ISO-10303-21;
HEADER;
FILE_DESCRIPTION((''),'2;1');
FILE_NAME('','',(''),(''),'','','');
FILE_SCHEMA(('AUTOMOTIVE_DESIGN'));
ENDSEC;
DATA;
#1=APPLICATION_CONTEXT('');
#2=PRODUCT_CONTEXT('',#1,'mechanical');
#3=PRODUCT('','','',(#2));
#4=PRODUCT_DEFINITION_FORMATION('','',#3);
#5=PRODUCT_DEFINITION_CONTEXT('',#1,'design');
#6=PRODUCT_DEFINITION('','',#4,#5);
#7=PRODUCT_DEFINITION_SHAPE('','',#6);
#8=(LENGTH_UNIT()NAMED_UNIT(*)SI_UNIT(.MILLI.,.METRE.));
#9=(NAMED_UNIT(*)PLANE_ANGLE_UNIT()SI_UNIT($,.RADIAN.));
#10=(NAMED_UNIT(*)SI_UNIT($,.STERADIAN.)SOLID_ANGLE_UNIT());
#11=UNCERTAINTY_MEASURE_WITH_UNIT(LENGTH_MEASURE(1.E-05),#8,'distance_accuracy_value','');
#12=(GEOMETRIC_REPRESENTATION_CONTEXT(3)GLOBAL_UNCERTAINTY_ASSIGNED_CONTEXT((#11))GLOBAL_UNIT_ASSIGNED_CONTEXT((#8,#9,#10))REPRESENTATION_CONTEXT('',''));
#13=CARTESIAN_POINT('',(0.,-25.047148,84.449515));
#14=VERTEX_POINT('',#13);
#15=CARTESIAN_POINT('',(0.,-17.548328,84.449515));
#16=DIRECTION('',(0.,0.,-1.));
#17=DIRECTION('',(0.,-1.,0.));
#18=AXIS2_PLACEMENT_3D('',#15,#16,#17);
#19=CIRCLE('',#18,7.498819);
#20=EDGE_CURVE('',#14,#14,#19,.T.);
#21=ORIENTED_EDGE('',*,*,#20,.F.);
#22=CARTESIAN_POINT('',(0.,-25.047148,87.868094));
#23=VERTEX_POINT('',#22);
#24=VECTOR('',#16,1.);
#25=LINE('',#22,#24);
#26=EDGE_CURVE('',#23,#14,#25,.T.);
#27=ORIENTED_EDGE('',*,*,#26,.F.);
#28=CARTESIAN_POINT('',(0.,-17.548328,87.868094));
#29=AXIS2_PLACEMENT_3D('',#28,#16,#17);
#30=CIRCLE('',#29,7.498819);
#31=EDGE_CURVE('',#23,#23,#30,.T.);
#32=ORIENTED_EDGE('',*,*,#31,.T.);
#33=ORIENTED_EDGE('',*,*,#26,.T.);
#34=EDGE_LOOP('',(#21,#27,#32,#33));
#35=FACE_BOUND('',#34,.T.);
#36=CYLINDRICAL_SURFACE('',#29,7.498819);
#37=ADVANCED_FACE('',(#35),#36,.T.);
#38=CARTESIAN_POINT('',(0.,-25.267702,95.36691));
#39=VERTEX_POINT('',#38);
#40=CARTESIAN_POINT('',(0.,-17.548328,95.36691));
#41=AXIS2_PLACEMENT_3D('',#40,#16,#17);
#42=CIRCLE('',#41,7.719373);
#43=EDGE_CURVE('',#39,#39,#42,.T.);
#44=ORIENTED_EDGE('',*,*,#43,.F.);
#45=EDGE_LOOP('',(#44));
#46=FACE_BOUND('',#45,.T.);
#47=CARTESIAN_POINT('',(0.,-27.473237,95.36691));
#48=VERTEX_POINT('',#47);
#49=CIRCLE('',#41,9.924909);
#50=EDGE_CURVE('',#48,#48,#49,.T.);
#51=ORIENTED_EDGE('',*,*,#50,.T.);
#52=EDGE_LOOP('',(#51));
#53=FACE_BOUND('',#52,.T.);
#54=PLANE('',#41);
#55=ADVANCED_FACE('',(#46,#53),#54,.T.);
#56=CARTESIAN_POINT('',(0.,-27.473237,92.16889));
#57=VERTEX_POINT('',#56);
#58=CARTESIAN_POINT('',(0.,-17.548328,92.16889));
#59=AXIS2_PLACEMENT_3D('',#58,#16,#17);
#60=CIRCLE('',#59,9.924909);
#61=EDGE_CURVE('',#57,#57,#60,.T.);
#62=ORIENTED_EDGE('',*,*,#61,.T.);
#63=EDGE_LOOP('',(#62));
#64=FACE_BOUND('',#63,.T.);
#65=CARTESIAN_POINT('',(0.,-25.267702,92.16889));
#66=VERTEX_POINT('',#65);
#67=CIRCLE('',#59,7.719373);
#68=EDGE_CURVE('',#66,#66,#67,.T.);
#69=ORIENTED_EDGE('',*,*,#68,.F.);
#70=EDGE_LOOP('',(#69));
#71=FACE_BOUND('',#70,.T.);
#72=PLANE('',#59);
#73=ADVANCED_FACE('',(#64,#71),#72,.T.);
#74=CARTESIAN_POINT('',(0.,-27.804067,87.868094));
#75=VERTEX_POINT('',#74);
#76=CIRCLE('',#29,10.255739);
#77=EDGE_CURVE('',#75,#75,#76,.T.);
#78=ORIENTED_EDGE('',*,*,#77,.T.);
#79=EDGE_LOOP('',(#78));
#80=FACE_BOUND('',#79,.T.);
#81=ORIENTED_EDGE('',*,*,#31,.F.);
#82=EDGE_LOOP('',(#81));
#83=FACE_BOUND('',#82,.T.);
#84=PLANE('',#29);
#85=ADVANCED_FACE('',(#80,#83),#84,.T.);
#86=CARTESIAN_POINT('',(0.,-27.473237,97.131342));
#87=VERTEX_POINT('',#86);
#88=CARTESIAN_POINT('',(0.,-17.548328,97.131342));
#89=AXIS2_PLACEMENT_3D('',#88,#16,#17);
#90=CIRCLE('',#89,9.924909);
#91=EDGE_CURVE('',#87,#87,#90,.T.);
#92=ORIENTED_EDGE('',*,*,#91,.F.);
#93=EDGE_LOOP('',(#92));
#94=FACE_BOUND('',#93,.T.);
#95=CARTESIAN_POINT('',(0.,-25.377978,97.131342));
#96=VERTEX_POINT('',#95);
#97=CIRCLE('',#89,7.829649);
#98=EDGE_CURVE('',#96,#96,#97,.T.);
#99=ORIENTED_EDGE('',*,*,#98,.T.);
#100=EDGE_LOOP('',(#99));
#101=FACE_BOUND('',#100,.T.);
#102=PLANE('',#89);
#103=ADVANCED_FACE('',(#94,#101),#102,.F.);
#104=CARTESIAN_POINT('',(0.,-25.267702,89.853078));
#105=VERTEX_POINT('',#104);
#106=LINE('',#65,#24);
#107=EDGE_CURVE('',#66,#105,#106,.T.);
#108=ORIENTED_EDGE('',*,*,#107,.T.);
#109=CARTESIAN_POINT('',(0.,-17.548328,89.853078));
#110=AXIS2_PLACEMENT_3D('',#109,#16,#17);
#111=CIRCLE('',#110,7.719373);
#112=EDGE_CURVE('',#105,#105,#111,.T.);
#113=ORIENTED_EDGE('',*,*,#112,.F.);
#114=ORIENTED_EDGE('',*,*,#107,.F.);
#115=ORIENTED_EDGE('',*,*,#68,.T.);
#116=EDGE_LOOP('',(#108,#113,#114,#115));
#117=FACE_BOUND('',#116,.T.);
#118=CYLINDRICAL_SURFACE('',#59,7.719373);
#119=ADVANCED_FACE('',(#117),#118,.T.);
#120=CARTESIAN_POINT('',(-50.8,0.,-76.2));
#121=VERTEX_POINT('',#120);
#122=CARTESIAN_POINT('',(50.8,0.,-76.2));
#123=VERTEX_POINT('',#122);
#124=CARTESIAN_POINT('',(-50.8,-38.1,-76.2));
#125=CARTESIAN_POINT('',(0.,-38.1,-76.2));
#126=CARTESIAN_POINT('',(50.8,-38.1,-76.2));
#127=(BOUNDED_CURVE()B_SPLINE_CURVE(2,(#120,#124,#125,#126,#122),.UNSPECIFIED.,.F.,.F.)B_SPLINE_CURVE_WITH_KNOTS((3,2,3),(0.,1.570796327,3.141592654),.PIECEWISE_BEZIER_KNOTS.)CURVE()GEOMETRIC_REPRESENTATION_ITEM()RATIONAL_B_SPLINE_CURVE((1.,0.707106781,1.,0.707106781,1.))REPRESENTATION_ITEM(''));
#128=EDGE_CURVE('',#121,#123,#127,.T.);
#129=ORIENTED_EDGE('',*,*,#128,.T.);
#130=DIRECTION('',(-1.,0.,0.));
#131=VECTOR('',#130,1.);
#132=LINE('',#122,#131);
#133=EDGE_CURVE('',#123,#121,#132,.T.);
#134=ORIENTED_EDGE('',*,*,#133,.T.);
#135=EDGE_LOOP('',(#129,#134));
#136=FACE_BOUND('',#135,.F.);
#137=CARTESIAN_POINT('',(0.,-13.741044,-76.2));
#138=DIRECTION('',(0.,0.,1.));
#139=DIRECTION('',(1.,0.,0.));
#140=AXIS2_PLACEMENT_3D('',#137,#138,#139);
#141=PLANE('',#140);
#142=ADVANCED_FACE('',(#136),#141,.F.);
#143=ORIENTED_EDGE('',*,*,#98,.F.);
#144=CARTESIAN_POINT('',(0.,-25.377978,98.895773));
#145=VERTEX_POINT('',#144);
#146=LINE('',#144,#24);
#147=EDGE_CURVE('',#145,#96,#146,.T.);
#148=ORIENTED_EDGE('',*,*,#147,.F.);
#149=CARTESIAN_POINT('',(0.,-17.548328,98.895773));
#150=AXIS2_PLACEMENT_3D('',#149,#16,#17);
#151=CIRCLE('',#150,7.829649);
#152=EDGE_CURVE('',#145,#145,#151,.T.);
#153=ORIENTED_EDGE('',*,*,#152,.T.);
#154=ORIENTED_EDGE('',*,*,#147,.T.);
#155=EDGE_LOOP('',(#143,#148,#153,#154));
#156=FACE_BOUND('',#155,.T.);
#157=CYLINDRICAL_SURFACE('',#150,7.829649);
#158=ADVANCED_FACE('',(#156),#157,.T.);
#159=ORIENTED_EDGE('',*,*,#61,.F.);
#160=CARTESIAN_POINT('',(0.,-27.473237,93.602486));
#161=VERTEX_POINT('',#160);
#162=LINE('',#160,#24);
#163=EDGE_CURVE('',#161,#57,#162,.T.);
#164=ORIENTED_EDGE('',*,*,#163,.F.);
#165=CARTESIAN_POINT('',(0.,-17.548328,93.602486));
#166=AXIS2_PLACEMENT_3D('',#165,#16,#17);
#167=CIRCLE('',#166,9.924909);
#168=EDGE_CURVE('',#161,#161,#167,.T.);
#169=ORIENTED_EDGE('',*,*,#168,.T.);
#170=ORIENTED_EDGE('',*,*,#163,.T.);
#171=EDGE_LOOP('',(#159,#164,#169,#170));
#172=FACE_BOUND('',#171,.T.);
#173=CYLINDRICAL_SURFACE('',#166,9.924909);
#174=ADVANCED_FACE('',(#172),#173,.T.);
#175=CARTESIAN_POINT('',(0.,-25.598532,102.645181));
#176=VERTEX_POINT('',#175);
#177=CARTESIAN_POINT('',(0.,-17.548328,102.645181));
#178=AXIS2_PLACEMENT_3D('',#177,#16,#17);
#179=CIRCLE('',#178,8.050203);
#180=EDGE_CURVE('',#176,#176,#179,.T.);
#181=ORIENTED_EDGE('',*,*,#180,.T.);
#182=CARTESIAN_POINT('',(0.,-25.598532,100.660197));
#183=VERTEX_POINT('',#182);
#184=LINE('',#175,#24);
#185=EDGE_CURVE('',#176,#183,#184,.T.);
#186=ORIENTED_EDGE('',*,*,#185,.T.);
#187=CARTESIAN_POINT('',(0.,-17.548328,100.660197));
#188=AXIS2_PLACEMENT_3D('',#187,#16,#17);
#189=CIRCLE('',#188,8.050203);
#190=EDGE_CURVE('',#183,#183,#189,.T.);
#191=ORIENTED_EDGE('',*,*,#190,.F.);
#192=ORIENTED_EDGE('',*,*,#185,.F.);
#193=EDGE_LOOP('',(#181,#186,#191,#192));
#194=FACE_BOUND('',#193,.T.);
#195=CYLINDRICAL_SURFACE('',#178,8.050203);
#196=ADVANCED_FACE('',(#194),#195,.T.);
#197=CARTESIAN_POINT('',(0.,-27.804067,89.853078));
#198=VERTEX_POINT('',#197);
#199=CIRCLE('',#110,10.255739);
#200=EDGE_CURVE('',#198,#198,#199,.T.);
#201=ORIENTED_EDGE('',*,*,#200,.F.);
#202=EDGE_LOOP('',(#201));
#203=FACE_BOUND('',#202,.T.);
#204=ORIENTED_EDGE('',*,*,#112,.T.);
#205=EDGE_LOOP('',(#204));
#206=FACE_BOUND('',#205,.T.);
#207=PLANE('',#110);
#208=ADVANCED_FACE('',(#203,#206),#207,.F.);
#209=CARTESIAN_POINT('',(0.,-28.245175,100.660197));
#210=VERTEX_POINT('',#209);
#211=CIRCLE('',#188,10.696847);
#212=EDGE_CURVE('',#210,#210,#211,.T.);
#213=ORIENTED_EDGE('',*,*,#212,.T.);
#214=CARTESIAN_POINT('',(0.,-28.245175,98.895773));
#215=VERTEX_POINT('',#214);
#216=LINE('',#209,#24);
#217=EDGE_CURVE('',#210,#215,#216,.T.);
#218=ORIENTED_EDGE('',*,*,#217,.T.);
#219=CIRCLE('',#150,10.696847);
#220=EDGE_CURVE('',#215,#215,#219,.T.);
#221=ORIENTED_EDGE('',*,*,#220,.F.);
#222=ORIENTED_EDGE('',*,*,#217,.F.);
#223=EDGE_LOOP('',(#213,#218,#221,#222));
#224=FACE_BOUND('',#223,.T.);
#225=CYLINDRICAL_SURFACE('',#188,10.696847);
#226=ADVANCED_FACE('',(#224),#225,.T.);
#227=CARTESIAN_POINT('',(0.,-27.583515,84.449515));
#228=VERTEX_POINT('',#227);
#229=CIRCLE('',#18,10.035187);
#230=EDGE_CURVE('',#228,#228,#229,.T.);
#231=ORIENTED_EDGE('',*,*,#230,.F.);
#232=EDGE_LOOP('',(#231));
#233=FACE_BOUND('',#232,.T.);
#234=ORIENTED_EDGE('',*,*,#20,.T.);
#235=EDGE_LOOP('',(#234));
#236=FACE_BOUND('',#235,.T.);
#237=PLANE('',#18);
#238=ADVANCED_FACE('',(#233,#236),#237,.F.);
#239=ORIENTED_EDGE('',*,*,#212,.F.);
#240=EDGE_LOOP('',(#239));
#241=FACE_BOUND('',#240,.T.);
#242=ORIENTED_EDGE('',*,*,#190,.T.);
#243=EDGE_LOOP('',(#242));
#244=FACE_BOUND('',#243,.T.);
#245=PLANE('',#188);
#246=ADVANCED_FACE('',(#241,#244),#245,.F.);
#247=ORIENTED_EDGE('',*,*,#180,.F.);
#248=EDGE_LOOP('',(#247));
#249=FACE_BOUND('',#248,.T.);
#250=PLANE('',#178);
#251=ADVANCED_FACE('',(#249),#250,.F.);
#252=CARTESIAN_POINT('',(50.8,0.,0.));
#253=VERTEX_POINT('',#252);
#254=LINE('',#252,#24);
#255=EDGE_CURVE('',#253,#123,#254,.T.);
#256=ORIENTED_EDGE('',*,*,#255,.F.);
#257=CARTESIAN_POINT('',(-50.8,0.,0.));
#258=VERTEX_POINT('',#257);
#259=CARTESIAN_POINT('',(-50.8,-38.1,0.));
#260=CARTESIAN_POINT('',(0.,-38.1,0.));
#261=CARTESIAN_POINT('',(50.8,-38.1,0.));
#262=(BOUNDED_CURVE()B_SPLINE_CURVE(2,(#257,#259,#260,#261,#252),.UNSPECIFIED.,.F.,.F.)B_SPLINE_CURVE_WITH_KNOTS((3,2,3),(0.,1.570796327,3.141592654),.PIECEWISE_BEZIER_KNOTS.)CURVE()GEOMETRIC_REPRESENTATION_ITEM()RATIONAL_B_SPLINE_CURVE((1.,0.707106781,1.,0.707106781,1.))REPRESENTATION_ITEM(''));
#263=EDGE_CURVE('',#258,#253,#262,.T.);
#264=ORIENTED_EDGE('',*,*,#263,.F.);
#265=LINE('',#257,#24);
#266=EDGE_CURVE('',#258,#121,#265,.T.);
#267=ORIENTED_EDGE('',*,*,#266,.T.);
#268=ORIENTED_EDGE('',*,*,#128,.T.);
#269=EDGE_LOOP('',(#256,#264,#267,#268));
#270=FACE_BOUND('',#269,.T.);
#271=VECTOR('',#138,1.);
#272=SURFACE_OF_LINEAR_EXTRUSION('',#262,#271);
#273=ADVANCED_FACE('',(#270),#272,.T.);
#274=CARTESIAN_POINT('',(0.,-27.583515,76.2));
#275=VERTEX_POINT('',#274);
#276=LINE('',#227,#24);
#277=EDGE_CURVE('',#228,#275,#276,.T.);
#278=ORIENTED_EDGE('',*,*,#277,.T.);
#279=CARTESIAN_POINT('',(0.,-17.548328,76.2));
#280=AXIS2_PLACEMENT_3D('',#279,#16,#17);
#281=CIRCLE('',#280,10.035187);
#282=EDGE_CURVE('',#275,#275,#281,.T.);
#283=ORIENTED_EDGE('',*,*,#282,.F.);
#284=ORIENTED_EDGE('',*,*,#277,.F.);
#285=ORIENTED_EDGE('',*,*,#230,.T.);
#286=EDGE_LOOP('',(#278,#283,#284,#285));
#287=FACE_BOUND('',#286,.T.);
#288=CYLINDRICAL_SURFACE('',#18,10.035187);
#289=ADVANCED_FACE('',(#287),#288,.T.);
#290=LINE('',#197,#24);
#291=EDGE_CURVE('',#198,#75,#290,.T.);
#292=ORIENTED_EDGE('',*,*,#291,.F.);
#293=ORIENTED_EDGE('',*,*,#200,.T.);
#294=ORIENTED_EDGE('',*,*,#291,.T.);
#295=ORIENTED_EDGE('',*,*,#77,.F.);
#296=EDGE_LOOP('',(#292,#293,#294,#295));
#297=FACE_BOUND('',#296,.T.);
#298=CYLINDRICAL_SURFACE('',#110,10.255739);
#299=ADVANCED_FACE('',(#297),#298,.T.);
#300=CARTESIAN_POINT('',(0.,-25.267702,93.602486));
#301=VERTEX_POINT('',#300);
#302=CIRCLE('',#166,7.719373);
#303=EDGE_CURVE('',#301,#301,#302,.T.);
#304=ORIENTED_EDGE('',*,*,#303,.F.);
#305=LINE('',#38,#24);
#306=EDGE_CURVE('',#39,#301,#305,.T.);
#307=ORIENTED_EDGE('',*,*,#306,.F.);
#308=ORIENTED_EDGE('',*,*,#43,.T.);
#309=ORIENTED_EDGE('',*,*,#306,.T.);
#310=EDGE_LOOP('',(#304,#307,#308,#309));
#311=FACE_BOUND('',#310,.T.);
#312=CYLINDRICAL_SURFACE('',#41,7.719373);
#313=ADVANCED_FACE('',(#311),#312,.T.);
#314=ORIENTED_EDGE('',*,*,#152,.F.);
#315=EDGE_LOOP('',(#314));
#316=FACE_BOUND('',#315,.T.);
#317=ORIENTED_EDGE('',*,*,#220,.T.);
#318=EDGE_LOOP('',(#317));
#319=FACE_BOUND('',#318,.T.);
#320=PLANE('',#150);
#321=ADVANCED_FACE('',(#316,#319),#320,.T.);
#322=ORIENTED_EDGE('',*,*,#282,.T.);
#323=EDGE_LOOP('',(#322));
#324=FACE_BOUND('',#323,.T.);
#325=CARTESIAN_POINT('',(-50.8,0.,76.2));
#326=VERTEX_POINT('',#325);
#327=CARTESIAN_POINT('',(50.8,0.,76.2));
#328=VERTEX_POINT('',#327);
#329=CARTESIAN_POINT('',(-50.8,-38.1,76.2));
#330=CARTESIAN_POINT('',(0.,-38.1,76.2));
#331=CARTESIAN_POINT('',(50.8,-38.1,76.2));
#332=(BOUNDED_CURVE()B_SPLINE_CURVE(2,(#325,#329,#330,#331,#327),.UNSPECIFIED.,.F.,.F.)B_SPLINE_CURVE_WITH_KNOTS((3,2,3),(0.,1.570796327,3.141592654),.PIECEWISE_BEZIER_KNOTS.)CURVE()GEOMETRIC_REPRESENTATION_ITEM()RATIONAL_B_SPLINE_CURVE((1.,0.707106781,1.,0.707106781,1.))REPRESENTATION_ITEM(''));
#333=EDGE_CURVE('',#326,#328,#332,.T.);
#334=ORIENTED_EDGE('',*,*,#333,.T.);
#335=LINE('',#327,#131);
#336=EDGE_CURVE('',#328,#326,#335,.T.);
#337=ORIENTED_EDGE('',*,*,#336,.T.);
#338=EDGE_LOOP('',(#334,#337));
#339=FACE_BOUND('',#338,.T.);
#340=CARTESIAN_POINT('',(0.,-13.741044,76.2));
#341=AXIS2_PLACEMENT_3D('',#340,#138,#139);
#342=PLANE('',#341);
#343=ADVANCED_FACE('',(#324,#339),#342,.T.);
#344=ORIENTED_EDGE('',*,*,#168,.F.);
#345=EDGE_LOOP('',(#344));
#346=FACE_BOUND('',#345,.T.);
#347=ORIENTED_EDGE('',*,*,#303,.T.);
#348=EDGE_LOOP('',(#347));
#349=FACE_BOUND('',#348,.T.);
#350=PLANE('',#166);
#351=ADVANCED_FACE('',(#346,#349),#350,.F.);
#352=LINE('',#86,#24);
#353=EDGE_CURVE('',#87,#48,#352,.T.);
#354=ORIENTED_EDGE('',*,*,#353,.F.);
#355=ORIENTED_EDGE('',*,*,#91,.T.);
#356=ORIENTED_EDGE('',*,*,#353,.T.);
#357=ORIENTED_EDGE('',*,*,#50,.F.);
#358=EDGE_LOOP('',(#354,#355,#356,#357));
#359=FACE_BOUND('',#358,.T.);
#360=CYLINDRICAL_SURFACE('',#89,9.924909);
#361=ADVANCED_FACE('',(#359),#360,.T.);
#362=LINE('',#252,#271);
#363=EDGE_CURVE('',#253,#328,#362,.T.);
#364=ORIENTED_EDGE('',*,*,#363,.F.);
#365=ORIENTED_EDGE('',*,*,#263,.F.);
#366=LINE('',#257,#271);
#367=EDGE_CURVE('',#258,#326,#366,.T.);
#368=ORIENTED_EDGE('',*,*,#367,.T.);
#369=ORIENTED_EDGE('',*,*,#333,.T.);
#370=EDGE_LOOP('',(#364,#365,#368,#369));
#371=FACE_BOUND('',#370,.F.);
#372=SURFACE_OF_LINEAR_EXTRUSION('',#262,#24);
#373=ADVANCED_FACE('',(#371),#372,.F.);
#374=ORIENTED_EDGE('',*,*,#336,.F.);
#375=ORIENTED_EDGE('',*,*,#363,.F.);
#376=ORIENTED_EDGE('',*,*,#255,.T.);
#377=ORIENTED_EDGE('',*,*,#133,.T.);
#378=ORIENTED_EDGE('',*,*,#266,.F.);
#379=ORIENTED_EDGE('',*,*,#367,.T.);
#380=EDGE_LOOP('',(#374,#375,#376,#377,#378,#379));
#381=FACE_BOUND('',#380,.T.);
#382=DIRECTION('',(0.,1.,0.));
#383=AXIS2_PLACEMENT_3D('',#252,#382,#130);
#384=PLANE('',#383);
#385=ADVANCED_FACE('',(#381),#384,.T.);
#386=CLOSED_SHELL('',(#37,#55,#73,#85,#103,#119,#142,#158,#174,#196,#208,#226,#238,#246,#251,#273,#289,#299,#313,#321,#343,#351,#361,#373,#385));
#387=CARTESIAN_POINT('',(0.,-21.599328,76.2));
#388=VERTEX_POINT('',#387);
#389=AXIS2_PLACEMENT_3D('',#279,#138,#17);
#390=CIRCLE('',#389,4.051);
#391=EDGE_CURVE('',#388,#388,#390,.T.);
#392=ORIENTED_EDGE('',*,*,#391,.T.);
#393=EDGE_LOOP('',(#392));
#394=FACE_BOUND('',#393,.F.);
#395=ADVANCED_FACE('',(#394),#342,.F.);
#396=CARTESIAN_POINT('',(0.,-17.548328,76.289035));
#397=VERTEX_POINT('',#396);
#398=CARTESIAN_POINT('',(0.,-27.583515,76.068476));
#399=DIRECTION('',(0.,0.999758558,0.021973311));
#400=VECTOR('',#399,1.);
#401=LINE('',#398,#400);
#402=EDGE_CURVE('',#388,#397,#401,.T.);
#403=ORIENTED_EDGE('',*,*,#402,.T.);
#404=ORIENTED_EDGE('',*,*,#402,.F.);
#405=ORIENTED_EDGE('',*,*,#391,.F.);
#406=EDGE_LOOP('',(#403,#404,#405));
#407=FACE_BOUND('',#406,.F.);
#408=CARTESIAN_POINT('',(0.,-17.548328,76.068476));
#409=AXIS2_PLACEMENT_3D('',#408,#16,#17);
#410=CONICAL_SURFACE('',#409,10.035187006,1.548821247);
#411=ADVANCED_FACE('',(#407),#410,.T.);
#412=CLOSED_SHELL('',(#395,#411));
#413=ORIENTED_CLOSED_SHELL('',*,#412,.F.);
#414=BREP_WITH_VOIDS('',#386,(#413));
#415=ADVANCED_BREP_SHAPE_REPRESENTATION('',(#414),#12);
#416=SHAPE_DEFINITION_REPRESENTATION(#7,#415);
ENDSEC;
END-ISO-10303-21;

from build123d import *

# Parameters (mm, degrees)
F1_DEPTH      = 76.2
F1_DEPTH_BACK = 76.2


# Not quite as in the source:
# - a feature of the source that left no trace in its solid (it failed there, or was rolled back) is left out


with BuildPart() as f1:
    # F0 (on Top) → F1 (new body, two sides)
    with BuildSketch(Plane.XY) as f1_sk:
        with BuildLine():
            Line((50.8, 0), (-50.8, 0))
            add(Edge.make_bspline(
                [(-50.8, 0), (-50.8, -38.1), (0, -38.1), (50.8, -38.1), (50.8, 0)],
                knots=[0, 0, 0, 1.5707963268, 1.5707963268, 3.1415926536, 3.1415926536, 3.1415926536], degree=2, weights=[1, 0.7071067812, 1, 0.7071067812, 1]))
        make_face()
    extrude(amount=F1_DEPTH)
    extrude(f1_sk.sketch, amount=-F1_DEPTH_BACK)

    # F2 (on Right) → F3 (revolve)
    with BuildSketch(Plane.YZ):
        Polygon((-27.5835152715, 76.0684758425), (-17.5483282655, 76.2890353799), (-17.5483282655, 102.6451811194), (-25.5985315889, 102.6451811194), (-25.5985315889, 100.6601974368), (-28.2451752573, 100.6601974368), (-28.2451752573, 98.8957732916), (-25.3779776394, 98.8957732916), (-25.3779776394, 97.1313416958), (-27.4732373655, 97.1313416958), (-27.4732373655, 95.3669101), (-25.267701596, 95.3669101), (-25.267701596, 93.6024859548), (-27.4732373655, 93.6024859548), (-27.4732373655, 92.1688899398), (-25.267701596, 92.1688899398), (-25.267701596, 89.8530781269), (-27.8040673584, 89.8530781269), (-27.8040673584, 87.8680944443), (-25.0471476465, 87.8680944443), (-25.0471476465, 84.4495147467), (-27.5835152715, 84.4495147467), align=None)
    revolve(axis=Axis((0, -17.5483282655, 90.2941823006), (0, 0, -1)))


solid = f1.part
